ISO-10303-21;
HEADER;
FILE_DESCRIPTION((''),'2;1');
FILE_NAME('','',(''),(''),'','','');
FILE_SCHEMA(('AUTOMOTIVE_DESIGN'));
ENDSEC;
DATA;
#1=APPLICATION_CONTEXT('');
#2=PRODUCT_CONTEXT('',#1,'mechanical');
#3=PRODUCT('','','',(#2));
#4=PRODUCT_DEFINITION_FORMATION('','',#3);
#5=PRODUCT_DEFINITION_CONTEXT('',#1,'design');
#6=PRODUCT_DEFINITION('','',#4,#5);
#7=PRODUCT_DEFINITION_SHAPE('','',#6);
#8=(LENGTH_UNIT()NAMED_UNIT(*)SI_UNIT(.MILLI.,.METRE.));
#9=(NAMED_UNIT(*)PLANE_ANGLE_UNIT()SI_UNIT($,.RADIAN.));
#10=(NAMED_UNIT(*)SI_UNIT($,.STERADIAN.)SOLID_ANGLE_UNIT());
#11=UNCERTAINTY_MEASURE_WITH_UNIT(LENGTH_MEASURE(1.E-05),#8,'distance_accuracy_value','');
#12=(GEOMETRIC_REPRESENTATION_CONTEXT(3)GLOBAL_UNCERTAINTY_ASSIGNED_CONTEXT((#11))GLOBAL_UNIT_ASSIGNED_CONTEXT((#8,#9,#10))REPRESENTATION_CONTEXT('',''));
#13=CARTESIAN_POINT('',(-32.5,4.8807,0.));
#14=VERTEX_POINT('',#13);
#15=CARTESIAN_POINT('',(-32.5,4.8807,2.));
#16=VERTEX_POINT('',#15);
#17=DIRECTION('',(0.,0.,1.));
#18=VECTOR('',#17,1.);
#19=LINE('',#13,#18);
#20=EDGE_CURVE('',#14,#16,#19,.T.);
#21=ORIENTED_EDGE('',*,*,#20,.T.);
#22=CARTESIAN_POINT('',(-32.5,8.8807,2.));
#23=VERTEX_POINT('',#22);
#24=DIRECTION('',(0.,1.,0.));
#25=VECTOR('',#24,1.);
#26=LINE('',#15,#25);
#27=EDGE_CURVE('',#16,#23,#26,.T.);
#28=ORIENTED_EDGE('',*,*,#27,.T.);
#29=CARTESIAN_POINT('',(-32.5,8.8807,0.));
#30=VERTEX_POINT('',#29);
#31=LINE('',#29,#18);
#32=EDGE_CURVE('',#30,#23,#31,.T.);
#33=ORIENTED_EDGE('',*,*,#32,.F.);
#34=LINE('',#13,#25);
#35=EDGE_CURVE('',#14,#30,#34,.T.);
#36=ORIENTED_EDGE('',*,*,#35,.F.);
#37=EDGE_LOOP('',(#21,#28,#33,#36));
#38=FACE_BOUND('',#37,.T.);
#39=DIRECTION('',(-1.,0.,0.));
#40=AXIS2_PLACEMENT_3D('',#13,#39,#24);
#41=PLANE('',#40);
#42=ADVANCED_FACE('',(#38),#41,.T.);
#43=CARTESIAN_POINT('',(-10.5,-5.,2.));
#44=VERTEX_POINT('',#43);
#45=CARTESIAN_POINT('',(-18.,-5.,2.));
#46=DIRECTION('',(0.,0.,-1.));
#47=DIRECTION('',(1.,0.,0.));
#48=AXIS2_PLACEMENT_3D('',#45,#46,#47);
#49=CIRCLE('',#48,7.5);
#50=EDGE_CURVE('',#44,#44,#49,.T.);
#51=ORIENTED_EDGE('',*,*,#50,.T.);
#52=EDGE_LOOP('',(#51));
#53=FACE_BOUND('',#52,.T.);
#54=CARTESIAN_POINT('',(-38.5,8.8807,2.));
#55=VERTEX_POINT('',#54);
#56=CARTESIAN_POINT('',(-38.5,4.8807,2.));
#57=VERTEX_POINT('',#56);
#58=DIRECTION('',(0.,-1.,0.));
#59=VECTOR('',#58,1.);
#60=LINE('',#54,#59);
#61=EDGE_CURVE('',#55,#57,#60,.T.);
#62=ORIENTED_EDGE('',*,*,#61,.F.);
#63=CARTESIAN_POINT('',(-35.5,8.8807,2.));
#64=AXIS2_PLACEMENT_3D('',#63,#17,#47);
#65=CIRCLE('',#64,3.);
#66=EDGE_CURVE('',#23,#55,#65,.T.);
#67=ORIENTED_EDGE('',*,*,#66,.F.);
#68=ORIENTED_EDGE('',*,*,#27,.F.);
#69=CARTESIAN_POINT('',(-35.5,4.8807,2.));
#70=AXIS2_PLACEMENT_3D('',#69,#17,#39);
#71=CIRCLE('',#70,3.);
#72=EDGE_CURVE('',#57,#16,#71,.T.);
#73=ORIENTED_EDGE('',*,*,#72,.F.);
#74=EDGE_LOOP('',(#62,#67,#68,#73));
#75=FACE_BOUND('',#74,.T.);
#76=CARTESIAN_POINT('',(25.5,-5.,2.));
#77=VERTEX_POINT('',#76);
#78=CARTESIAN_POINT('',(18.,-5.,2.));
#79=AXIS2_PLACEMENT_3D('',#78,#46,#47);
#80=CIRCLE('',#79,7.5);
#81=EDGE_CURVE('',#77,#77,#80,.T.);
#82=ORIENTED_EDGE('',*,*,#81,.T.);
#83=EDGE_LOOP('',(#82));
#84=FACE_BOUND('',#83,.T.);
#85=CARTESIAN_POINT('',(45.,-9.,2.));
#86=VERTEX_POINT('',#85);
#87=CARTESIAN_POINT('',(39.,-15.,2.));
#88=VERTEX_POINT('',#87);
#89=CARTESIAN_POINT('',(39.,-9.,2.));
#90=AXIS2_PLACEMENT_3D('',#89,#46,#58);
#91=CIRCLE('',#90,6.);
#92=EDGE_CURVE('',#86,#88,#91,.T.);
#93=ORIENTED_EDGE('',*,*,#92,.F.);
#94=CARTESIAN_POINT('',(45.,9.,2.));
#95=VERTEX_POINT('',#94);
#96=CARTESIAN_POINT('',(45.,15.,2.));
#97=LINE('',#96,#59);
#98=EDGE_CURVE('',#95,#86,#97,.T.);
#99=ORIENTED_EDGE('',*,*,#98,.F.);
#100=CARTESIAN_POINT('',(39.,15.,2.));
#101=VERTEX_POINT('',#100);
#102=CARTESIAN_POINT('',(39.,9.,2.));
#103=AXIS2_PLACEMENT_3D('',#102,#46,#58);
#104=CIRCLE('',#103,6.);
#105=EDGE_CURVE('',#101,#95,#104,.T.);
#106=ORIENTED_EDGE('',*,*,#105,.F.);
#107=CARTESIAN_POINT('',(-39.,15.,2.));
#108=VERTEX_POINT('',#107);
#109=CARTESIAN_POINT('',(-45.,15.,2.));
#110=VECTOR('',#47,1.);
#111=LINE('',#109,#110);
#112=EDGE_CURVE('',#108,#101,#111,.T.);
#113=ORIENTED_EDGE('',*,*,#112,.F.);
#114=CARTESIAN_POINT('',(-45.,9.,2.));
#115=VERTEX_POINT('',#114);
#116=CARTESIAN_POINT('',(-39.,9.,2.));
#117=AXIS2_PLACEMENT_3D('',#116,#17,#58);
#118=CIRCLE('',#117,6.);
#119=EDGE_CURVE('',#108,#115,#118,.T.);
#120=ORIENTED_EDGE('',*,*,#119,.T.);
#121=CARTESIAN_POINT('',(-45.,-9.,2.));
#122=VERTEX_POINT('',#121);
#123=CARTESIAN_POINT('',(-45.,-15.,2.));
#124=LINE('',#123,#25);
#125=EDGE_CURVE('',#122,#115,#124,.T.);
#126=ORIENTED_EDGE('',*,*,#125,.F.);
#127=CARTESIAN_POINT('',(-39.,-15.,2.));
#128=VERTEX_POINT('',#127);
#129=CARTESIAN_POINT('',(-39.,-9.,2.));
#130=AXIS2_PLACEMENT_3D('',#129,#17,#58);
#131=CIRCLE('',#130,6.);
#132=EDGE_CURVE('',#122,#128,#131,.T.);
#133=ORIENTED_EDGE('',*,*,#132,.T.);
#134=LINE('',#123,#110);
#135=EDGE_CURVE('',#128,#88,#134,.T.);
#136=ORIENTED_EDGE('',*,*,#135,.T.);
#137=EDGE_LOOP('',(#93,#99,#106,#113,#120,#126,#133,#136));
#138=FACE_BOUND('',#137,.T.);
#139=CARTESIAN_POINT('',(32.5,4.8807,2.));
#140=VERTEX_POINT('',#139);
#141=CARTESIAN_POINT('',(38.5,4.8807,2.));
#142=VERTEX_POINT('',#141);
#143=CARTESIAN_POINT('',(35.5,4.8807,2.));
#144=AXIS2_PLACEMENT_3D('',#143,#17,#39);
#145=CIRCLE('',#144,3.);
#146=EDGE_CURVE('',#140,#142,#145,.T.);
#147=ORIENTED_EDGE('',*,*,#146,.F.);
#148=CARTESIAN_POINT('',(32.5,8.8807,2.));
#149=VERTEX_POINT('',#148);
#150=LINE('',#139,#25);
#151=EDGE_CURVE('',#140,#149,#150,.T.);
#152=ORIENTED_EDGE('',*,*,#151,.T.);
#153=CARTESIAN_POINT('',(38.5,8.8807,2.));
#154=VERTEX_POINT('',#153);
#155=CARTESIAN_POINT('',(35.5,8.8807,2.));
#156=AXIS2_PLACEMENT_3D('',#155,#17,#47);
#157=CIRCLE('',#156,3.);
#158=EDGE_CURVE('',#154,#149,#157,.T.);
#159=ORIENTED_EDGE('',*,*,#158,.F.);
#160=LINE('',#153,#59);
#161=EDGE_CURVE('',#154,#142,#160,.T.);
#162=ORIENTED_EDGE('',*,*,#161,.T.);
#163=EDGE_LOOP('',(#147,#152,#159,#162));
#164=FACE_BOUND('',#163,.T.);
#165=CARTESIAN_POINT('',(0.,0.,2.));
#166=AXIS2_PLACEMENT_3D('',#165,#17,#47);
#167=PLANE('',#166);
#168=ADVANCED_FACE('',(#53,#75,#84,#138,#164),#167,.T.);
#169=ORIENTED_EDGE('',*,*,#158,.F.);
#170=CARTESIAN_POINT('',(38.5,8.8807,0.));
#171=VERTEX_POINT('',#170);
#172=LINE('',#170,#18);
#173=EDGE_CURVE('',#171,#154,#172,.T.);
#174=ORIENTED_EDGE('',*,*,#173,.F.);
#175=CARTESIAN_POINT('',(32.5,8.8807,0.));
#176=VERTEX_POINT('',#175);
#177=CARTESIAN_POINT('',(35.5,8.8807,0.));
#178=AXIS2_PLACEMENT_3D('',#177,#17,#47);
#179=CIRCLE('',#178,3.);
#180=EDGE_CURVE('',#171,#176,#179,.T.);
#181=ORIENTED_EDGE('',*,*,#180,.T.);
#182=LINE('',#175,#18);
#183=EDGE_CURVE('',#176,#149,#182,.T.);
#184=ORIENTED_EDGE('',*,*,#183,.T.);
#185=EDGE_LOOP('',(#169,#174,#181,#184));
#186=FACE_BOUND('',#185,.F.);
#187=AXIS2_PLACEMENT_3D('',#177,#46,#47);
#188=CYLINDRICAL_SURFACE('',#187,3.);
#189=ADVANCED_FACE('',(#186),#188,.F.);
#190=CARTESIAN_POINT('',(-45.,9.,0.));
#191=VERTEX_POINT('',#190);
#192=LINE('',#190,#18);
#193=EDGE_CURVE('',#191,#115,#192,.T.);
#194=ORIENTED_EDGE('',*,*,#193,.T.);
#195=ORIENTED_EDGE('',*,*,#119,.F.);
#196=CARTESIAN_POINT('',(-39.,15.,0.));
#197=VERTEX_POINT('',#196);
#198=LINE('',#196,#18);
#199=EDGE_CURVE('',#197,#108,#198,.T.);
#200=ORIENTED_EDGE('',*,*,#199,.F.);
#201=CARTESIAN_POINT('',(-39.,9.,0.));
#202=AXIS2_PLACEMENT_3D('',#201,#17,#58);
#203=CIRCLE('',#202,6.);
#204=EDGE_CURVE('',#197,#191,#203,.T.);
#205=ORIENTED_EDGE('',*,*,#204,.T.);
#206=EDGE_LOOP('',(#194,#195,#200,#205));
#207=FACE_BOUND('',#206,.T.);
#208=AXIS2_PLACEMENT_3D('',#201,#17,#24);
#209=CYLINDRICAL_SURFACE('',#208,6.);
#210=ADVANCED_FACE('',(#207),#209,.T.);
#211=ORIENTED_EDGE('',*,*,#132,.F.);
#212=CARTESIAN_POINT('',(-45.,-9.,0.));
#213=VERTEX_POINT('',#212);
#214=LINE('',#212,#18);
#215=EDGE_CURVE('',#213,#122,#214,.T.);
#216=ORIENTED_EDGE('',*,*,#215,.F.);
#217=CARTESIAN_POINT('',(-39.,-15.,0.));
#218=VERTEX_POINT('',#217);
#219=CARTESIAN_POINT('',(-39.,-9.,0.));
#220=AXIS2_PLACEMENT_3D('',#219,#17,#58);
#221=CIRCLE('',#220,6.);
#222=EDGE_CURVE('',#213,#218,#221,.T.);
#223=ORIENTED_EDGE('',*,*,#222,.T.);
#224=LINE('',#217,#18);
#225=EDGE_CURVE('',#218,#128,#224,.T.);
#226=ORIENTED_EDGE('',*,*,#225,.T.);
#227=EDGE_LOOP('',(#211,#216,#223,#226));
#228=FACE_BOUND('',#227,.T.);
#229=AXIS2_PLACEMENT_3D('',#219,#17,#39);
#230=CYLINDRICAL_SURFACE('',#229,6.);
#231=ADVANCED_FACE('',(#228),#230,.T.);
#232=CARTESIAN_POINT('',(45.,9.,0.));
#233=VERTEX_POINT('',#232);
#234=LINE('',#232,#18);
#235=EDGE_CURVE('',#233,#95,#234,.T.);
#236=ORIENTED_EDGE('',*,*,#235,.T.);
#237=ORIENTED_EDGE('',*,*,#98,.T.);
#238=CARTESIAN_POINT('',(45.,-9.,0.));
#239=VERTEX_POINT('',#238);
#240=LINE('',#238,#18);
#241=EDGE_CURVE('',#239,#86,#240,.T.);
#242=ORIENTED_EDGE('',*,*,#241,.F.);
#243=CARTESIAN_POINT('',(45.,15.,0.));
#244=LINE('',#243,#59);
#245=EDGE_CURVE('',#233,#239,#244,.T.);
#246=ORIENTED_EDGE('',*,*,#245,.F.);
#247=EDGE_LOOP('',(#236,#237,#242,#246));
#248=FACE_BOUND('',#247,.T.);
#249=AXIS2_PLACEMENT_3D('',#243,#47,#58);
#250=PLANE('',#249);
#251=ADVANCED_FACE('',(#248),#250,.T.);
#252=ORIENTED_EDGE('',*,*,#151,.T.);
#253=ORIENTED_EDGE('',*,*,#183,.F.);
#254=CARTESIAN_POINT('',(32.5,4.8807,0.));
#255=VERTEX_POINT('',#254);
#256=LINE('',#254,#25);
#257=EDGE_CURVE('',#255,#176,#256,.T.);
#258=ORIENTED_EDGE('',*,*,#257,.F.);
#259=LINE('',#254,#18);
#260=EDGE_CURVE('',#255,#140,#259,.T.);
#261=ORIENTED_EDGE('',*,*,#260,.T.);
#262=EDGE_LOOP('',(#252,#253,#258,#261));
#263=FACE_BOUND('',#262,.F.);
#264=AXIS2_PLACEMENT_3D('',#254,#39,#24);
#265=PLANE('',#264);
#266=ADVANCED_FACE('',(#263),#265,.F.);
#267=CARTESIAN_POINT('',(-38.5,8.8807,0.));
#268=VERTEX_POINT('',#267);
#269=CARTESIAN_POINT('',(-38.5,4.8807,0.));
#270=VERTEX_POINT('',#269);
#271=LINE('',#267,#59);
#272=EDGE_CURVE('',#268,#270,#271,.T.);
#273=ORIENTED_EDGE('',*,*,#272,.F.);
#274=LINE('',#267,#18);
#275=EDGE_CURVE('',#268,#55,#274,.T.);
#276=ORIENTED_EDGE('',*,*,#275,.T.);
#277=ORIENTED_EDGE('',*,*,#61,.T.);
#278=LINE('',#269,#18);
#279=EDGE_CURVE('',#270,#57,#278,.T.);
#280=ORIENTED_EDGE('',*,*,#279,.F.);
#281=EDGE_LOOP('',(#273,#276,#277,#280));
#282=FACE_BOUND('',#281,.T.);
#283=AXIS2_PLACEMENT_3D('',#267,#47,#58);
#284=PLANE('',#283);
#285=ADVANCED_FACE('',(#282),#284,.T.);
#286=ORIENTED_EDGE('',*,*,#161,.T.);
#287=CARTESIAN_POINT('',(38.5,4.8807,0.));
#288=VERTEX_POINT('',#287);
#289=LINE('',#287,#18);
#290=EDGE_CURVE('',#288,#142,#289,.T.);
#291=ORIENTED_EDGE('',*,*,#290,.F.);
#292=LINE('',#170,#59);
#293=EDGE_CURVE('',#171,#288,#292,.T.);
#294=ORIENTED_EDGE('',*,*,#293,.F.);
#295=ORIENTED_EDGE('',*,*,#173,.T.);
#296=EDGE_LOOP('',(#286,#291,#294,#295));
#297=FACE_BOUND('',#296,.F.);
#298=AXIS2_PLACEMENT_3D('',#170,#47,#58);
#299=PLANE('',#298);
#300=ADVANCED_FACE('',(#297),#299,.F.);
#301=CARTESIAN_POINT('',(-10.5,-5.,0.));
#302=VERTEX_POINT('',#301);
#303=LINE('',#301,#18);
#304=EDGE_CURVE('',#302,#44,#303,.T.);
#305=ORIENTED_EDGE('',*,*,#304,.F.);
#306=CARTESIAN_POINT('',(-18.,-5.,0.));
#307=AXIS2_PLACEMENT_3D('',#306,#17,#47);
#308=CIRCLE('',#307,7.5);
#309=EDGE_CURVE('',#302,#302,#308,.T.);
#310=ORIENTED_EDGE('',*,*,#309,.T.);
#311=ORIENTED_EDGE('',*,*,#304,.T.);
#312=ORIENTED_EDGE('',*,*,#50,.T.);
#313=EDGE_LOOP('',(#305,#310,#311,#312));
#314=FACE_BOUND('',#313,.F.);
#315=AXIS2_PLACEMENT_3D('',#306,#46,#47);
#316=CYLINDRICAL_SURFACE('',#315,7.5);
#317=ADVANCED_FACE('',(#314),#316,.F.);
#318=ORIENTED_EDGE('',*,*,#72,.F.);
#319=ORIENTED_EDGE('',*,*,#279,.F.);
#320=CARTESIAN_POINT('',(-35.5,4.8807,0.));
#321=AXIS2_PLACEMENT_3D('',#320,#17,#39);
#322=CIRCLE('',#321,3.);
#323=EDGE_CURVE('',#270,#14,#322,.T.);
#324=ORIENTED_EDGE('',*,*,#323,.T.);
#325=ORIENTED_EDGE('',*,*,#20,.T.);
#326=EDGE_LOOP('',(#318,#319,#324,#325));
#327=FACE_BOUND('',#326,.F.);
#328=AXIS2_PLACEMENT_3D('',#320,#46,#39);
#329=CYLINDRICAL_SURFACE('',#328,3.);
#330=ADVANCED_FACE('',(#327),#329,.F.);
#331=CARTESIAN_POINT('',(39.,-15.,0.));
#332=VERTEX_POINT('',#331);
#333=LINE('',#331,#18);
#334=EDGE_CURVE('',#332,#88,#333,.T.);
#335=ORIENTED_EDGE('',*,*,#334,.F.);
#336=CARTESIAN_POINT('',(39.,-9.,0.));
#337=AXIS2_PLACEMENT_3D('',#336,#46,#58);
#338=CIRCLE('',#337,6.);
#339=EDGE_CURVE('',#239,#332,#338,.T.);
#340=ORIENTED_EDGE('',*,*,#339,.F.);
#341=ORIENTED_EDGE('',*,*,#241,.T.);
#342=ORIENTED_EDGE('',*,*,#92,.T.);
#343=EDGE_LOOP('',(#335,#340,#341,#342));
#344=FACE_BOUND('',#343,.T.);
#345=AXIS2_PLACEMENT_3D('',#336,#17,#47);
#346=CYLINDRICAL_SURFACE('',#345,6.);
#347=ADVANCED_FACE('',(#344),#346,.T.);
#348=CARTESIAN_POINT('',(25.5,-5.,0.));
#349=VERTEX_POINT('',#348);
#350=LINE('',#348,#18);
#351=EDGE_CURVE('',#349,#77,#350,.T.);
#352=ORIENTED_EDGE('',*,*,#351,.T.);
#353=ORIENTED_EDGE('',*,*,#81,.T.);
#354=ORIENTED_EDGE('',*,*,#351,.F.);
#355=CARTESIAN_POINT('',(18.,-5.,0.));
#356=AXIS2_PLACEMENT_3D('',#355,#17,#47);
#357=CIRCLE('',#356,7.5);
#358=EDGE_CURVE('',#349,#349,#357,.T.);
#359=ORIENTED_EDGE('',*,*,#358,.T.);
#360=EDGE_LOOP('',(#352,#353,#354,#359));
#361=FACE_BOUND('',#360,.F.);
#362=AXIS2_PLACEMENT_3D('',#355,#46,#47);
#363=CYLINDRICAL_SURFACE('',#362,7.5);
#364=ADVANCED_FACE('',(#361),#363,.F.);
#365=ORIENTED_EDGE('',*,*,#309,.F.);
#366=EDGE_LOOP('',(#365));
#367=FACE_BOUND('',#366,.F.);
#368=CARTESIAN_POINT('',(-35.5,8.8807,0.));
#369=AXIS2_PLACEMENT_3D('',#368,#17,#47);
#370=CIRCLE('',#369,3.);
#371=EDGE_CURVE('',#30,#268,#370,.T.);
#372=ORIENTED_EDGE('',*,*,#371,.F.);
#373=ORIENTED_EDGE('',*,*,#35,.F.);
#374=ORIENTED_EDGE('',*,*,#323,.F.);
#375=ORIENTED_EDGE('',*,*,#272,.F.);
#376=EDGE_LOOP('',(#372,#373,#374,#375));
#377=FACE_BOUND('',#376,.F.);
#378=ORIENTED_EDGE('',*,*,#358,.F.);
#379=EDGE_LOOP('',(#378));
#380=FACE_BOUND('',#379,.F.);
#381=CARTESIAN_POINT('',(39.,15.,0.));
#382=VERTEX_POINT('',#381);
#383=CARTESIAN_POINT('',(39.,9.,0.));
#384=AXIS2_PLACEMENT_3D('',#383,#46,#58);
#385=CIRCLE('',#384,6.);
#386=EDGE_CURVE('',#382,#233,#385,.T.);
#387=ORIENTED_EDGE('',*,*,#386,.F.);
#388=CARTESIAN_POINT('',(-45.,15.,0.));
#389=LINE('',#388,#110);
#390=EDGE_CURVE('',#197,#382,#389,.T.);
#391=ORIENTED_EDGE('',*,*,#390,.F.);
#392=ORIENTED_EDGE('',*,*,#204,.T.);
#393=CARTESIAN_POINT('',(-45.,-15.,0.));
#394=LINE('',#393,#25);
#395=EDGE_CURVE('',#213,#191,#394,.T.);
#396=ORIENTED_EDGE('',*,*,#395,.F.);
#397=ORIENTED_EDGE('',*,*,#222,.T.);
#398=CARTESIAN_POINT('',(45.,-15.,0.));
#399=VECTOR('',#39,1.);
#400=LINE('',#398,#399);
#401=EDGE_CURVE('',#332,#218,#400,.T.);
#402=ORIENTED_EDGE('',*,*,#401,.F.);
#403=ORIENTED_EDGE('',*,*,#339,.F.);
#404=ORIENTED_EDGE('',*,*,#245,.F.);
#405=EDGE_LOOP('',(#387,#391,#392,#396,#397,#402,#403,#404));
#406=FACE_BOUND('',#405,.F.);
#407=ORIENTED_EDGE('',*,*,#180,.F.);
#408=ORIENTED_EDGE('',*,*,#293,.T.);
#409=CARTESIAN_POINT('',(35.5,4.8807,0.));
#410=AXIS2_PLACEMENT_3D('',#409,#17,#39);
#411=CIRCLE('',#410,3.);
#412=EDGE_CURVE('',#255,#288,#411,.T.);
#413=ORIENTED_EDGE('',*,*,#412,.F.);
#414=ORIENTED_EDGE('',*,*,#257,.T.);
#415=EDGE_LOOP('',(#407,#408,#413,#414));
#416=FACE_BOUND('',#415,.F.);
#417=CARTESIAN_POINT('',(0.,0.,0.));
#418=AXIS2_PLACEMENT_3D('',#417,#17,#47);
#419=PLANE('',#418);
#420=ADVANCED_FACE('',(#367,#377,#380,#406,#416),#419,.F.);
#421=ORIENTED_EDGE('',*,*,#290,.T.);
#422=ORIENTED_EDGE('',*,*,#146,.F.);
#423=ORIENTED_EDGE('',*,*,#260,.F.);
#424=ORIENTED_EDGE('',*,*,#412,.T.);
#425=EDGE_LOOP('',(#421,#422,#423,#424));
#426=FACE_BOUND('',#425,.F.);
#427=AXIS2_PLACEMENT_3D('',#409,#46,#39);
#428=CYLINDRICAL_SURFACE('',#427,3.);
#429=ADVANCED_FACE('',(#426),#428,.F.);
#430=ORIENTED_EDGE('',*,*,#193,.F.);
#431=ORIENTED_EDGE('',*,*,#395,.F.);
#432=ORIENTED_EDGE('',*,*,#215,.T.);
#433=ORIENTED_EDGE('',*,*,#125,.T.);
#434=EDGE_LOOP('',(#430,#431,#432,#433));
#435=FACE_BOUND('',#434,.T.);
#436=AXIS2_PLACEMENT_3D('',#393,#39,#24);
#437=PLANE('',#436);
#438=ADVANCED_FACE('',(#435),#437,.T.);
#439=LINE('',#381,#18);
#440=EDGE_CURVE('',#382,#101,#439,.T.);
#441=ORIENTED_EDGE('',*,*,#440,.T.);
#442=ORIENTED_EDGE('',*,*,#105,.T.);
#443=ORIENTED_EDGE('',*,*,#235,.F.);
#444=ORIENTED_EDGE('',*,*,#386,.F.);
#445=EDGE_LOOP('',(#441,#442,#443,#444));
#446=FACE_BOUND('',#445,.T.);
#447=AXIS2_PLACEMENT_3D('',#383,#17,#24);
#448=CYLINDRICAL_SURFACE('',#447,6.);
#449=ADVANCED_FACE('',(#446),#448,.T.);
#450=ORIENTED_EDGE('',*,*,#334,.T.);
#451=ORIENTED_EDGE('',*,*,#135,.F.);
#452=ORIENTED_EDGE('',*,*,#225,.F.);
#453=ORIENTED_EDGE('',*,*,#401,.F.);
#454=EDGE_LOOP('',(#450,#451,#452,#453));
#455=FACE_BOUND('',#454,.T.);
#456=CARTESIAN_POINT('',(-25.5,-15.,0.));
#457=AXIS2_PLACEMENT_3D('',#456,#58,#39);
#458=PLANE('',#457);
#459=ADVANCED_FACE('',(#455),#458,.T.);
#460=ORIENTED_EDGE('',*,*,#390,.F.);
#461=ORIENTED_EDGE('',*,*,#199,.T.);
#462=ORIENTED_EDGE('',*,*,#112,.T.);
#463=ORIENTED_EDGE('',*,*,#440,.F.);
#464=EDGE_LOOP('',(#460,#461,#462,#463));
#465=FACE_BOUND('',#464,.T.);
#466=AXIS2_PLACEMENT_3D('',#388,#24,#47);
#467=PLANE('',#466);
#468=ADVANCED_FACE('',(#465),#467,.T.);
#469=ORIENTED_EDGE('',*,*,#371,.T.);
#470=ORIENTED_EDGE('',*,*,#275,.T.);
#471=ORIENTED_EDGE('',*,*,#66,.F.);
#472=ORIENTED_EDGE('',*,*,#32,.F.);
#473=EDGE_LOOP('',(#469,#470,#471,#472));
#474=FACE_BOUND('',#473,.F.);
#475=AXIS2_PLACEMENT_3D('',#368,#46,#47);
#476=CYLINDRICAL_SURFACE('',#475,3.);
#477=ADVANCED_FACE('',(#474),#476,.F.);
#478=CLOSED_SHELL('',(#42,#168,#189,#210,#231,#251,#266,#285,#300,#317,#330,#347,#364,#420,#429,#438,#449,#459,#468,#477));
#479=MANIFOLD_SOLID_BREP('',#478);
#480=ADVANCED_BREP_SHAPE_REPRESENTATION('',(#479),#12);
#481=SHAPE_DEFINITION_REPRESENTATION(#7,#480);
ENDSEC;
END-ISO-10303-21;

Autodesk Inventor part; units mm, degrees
ref_plane "YZ Plane" through (0, 0, 0) normal (1, 0, 0) x (0, 1, 0)
ref_plane "XZ Plane" through (0, 0, 0) normal (0, 1, 0) x (-1, 0, 0)
ref_plane "XY Plane" through (0, 0, 0) normal (0, 0, 1) x (1, 0, 0)
sketch "Sketch1" plane through (0, 0, 0) normal (0, 0, 1) x (1, 0, 0)
  line L0 (-45, 15) -> (45, 15)
  line L1 (45, 15) -> (45, -15)
  line L2 (45, -15) -> (-45, -15)
  line L3 (-45, -15) -> (-45, 15)
  line L4 (-45, 15) -> (45, -15) construction
  line L5 (45, 15) -> (-45, -15) construction
  circle A0 centre (18, -5) radius 7.5
  circle A1 centre (-18, -5) radius 7.5
  line L6 (0, 15) -> (0, -15) construction
  line L7 (25.5, -5) -> (25.5, -15)
  line L8 (10.5, -5) -> (10.5, -15)
  line L9 (-10.5, -5) -> (-10.5, -15)
  line L10 (-25.5, -5) -> (-25.5, -15)
  line L11 (35.5, 8.8807) -> (35.5, 4.8807) construction
  line L12 (38.5, 8.8807) -> (38.5, 4.8807)
  line L13 (32.5, 4.8807) -> (32.5, 8.8807)
  arc A2 (38.5, 8.8807) -> (32.5, 8.8807) centre (35.5, 8.8807) ccw
  arc A3 (32.5, 4.8807) -> (38.5, 4.8807) centre (35.5, 4.8807) ccw
  line L14 (-35.5, 8.8807) -> (-35.5, 4.8807) construction
  line L15 (-38.5, 8.8807) -> (-38.5, 4.8807)
  line L16 (-32.5, 4.8807) -> (-32.5, 8.8807)
  arc A4 (-32.5, 8.8807) -> (-38.5, 8.8807) centre (-35.5, 8.8807) ccw
  arc A5 (-38.5, 4.8807) -> (-32.5, 4.8807) centre (-35.5, 4.8807) ccw
  point P0 (0, 0)
  point P1 (0, 0)
  point P2 (35.5, 6.8807)
  point P3 (-35.5, 6.8807)
  dimension "d0" = 90
  dimension "d1" = 30
  dimension "d2" = 15
  dimension "d3" = 36
  dimension "d6" = 10
  dimension "d7" = 6
  dimension "d8" = 4
  dimension "d9" = 71
extrude "Plate1" add sketch "Sketch1" along normal blind 2 contours L0 L1 L2 L7 A0 L8 L9 A1 L10 L3 | L10 A1 L9 L2 | L2 L8 A0 L7
fillet "Corner Round1" radius 6 4 edges at (-45, 15, 1) (-45, -15, 1) (45, 15, 1) (45, -15, 1)
equation "\"d4\" = Thickness"
equation "\"BendRadius\" = Thickness"
equation "\"BendReliefWidth\" = Thickness"
equation "\"BendReliefDepth\" = 0.5 * Thickness"
equation "\"CornerReliefSize\" = 4 * Thickness"
equation "\"MinimumRemnant\" = 2 * Thickness"
equation "\"TransitionRadius\" = BendRadius"
equation "\"JacobiRadiusSize\" = BendRadius"
equation "\"GapSize\" = Thickness"
equation "\"Thickness\" = 2"
properties part number "motor pillar 4"
